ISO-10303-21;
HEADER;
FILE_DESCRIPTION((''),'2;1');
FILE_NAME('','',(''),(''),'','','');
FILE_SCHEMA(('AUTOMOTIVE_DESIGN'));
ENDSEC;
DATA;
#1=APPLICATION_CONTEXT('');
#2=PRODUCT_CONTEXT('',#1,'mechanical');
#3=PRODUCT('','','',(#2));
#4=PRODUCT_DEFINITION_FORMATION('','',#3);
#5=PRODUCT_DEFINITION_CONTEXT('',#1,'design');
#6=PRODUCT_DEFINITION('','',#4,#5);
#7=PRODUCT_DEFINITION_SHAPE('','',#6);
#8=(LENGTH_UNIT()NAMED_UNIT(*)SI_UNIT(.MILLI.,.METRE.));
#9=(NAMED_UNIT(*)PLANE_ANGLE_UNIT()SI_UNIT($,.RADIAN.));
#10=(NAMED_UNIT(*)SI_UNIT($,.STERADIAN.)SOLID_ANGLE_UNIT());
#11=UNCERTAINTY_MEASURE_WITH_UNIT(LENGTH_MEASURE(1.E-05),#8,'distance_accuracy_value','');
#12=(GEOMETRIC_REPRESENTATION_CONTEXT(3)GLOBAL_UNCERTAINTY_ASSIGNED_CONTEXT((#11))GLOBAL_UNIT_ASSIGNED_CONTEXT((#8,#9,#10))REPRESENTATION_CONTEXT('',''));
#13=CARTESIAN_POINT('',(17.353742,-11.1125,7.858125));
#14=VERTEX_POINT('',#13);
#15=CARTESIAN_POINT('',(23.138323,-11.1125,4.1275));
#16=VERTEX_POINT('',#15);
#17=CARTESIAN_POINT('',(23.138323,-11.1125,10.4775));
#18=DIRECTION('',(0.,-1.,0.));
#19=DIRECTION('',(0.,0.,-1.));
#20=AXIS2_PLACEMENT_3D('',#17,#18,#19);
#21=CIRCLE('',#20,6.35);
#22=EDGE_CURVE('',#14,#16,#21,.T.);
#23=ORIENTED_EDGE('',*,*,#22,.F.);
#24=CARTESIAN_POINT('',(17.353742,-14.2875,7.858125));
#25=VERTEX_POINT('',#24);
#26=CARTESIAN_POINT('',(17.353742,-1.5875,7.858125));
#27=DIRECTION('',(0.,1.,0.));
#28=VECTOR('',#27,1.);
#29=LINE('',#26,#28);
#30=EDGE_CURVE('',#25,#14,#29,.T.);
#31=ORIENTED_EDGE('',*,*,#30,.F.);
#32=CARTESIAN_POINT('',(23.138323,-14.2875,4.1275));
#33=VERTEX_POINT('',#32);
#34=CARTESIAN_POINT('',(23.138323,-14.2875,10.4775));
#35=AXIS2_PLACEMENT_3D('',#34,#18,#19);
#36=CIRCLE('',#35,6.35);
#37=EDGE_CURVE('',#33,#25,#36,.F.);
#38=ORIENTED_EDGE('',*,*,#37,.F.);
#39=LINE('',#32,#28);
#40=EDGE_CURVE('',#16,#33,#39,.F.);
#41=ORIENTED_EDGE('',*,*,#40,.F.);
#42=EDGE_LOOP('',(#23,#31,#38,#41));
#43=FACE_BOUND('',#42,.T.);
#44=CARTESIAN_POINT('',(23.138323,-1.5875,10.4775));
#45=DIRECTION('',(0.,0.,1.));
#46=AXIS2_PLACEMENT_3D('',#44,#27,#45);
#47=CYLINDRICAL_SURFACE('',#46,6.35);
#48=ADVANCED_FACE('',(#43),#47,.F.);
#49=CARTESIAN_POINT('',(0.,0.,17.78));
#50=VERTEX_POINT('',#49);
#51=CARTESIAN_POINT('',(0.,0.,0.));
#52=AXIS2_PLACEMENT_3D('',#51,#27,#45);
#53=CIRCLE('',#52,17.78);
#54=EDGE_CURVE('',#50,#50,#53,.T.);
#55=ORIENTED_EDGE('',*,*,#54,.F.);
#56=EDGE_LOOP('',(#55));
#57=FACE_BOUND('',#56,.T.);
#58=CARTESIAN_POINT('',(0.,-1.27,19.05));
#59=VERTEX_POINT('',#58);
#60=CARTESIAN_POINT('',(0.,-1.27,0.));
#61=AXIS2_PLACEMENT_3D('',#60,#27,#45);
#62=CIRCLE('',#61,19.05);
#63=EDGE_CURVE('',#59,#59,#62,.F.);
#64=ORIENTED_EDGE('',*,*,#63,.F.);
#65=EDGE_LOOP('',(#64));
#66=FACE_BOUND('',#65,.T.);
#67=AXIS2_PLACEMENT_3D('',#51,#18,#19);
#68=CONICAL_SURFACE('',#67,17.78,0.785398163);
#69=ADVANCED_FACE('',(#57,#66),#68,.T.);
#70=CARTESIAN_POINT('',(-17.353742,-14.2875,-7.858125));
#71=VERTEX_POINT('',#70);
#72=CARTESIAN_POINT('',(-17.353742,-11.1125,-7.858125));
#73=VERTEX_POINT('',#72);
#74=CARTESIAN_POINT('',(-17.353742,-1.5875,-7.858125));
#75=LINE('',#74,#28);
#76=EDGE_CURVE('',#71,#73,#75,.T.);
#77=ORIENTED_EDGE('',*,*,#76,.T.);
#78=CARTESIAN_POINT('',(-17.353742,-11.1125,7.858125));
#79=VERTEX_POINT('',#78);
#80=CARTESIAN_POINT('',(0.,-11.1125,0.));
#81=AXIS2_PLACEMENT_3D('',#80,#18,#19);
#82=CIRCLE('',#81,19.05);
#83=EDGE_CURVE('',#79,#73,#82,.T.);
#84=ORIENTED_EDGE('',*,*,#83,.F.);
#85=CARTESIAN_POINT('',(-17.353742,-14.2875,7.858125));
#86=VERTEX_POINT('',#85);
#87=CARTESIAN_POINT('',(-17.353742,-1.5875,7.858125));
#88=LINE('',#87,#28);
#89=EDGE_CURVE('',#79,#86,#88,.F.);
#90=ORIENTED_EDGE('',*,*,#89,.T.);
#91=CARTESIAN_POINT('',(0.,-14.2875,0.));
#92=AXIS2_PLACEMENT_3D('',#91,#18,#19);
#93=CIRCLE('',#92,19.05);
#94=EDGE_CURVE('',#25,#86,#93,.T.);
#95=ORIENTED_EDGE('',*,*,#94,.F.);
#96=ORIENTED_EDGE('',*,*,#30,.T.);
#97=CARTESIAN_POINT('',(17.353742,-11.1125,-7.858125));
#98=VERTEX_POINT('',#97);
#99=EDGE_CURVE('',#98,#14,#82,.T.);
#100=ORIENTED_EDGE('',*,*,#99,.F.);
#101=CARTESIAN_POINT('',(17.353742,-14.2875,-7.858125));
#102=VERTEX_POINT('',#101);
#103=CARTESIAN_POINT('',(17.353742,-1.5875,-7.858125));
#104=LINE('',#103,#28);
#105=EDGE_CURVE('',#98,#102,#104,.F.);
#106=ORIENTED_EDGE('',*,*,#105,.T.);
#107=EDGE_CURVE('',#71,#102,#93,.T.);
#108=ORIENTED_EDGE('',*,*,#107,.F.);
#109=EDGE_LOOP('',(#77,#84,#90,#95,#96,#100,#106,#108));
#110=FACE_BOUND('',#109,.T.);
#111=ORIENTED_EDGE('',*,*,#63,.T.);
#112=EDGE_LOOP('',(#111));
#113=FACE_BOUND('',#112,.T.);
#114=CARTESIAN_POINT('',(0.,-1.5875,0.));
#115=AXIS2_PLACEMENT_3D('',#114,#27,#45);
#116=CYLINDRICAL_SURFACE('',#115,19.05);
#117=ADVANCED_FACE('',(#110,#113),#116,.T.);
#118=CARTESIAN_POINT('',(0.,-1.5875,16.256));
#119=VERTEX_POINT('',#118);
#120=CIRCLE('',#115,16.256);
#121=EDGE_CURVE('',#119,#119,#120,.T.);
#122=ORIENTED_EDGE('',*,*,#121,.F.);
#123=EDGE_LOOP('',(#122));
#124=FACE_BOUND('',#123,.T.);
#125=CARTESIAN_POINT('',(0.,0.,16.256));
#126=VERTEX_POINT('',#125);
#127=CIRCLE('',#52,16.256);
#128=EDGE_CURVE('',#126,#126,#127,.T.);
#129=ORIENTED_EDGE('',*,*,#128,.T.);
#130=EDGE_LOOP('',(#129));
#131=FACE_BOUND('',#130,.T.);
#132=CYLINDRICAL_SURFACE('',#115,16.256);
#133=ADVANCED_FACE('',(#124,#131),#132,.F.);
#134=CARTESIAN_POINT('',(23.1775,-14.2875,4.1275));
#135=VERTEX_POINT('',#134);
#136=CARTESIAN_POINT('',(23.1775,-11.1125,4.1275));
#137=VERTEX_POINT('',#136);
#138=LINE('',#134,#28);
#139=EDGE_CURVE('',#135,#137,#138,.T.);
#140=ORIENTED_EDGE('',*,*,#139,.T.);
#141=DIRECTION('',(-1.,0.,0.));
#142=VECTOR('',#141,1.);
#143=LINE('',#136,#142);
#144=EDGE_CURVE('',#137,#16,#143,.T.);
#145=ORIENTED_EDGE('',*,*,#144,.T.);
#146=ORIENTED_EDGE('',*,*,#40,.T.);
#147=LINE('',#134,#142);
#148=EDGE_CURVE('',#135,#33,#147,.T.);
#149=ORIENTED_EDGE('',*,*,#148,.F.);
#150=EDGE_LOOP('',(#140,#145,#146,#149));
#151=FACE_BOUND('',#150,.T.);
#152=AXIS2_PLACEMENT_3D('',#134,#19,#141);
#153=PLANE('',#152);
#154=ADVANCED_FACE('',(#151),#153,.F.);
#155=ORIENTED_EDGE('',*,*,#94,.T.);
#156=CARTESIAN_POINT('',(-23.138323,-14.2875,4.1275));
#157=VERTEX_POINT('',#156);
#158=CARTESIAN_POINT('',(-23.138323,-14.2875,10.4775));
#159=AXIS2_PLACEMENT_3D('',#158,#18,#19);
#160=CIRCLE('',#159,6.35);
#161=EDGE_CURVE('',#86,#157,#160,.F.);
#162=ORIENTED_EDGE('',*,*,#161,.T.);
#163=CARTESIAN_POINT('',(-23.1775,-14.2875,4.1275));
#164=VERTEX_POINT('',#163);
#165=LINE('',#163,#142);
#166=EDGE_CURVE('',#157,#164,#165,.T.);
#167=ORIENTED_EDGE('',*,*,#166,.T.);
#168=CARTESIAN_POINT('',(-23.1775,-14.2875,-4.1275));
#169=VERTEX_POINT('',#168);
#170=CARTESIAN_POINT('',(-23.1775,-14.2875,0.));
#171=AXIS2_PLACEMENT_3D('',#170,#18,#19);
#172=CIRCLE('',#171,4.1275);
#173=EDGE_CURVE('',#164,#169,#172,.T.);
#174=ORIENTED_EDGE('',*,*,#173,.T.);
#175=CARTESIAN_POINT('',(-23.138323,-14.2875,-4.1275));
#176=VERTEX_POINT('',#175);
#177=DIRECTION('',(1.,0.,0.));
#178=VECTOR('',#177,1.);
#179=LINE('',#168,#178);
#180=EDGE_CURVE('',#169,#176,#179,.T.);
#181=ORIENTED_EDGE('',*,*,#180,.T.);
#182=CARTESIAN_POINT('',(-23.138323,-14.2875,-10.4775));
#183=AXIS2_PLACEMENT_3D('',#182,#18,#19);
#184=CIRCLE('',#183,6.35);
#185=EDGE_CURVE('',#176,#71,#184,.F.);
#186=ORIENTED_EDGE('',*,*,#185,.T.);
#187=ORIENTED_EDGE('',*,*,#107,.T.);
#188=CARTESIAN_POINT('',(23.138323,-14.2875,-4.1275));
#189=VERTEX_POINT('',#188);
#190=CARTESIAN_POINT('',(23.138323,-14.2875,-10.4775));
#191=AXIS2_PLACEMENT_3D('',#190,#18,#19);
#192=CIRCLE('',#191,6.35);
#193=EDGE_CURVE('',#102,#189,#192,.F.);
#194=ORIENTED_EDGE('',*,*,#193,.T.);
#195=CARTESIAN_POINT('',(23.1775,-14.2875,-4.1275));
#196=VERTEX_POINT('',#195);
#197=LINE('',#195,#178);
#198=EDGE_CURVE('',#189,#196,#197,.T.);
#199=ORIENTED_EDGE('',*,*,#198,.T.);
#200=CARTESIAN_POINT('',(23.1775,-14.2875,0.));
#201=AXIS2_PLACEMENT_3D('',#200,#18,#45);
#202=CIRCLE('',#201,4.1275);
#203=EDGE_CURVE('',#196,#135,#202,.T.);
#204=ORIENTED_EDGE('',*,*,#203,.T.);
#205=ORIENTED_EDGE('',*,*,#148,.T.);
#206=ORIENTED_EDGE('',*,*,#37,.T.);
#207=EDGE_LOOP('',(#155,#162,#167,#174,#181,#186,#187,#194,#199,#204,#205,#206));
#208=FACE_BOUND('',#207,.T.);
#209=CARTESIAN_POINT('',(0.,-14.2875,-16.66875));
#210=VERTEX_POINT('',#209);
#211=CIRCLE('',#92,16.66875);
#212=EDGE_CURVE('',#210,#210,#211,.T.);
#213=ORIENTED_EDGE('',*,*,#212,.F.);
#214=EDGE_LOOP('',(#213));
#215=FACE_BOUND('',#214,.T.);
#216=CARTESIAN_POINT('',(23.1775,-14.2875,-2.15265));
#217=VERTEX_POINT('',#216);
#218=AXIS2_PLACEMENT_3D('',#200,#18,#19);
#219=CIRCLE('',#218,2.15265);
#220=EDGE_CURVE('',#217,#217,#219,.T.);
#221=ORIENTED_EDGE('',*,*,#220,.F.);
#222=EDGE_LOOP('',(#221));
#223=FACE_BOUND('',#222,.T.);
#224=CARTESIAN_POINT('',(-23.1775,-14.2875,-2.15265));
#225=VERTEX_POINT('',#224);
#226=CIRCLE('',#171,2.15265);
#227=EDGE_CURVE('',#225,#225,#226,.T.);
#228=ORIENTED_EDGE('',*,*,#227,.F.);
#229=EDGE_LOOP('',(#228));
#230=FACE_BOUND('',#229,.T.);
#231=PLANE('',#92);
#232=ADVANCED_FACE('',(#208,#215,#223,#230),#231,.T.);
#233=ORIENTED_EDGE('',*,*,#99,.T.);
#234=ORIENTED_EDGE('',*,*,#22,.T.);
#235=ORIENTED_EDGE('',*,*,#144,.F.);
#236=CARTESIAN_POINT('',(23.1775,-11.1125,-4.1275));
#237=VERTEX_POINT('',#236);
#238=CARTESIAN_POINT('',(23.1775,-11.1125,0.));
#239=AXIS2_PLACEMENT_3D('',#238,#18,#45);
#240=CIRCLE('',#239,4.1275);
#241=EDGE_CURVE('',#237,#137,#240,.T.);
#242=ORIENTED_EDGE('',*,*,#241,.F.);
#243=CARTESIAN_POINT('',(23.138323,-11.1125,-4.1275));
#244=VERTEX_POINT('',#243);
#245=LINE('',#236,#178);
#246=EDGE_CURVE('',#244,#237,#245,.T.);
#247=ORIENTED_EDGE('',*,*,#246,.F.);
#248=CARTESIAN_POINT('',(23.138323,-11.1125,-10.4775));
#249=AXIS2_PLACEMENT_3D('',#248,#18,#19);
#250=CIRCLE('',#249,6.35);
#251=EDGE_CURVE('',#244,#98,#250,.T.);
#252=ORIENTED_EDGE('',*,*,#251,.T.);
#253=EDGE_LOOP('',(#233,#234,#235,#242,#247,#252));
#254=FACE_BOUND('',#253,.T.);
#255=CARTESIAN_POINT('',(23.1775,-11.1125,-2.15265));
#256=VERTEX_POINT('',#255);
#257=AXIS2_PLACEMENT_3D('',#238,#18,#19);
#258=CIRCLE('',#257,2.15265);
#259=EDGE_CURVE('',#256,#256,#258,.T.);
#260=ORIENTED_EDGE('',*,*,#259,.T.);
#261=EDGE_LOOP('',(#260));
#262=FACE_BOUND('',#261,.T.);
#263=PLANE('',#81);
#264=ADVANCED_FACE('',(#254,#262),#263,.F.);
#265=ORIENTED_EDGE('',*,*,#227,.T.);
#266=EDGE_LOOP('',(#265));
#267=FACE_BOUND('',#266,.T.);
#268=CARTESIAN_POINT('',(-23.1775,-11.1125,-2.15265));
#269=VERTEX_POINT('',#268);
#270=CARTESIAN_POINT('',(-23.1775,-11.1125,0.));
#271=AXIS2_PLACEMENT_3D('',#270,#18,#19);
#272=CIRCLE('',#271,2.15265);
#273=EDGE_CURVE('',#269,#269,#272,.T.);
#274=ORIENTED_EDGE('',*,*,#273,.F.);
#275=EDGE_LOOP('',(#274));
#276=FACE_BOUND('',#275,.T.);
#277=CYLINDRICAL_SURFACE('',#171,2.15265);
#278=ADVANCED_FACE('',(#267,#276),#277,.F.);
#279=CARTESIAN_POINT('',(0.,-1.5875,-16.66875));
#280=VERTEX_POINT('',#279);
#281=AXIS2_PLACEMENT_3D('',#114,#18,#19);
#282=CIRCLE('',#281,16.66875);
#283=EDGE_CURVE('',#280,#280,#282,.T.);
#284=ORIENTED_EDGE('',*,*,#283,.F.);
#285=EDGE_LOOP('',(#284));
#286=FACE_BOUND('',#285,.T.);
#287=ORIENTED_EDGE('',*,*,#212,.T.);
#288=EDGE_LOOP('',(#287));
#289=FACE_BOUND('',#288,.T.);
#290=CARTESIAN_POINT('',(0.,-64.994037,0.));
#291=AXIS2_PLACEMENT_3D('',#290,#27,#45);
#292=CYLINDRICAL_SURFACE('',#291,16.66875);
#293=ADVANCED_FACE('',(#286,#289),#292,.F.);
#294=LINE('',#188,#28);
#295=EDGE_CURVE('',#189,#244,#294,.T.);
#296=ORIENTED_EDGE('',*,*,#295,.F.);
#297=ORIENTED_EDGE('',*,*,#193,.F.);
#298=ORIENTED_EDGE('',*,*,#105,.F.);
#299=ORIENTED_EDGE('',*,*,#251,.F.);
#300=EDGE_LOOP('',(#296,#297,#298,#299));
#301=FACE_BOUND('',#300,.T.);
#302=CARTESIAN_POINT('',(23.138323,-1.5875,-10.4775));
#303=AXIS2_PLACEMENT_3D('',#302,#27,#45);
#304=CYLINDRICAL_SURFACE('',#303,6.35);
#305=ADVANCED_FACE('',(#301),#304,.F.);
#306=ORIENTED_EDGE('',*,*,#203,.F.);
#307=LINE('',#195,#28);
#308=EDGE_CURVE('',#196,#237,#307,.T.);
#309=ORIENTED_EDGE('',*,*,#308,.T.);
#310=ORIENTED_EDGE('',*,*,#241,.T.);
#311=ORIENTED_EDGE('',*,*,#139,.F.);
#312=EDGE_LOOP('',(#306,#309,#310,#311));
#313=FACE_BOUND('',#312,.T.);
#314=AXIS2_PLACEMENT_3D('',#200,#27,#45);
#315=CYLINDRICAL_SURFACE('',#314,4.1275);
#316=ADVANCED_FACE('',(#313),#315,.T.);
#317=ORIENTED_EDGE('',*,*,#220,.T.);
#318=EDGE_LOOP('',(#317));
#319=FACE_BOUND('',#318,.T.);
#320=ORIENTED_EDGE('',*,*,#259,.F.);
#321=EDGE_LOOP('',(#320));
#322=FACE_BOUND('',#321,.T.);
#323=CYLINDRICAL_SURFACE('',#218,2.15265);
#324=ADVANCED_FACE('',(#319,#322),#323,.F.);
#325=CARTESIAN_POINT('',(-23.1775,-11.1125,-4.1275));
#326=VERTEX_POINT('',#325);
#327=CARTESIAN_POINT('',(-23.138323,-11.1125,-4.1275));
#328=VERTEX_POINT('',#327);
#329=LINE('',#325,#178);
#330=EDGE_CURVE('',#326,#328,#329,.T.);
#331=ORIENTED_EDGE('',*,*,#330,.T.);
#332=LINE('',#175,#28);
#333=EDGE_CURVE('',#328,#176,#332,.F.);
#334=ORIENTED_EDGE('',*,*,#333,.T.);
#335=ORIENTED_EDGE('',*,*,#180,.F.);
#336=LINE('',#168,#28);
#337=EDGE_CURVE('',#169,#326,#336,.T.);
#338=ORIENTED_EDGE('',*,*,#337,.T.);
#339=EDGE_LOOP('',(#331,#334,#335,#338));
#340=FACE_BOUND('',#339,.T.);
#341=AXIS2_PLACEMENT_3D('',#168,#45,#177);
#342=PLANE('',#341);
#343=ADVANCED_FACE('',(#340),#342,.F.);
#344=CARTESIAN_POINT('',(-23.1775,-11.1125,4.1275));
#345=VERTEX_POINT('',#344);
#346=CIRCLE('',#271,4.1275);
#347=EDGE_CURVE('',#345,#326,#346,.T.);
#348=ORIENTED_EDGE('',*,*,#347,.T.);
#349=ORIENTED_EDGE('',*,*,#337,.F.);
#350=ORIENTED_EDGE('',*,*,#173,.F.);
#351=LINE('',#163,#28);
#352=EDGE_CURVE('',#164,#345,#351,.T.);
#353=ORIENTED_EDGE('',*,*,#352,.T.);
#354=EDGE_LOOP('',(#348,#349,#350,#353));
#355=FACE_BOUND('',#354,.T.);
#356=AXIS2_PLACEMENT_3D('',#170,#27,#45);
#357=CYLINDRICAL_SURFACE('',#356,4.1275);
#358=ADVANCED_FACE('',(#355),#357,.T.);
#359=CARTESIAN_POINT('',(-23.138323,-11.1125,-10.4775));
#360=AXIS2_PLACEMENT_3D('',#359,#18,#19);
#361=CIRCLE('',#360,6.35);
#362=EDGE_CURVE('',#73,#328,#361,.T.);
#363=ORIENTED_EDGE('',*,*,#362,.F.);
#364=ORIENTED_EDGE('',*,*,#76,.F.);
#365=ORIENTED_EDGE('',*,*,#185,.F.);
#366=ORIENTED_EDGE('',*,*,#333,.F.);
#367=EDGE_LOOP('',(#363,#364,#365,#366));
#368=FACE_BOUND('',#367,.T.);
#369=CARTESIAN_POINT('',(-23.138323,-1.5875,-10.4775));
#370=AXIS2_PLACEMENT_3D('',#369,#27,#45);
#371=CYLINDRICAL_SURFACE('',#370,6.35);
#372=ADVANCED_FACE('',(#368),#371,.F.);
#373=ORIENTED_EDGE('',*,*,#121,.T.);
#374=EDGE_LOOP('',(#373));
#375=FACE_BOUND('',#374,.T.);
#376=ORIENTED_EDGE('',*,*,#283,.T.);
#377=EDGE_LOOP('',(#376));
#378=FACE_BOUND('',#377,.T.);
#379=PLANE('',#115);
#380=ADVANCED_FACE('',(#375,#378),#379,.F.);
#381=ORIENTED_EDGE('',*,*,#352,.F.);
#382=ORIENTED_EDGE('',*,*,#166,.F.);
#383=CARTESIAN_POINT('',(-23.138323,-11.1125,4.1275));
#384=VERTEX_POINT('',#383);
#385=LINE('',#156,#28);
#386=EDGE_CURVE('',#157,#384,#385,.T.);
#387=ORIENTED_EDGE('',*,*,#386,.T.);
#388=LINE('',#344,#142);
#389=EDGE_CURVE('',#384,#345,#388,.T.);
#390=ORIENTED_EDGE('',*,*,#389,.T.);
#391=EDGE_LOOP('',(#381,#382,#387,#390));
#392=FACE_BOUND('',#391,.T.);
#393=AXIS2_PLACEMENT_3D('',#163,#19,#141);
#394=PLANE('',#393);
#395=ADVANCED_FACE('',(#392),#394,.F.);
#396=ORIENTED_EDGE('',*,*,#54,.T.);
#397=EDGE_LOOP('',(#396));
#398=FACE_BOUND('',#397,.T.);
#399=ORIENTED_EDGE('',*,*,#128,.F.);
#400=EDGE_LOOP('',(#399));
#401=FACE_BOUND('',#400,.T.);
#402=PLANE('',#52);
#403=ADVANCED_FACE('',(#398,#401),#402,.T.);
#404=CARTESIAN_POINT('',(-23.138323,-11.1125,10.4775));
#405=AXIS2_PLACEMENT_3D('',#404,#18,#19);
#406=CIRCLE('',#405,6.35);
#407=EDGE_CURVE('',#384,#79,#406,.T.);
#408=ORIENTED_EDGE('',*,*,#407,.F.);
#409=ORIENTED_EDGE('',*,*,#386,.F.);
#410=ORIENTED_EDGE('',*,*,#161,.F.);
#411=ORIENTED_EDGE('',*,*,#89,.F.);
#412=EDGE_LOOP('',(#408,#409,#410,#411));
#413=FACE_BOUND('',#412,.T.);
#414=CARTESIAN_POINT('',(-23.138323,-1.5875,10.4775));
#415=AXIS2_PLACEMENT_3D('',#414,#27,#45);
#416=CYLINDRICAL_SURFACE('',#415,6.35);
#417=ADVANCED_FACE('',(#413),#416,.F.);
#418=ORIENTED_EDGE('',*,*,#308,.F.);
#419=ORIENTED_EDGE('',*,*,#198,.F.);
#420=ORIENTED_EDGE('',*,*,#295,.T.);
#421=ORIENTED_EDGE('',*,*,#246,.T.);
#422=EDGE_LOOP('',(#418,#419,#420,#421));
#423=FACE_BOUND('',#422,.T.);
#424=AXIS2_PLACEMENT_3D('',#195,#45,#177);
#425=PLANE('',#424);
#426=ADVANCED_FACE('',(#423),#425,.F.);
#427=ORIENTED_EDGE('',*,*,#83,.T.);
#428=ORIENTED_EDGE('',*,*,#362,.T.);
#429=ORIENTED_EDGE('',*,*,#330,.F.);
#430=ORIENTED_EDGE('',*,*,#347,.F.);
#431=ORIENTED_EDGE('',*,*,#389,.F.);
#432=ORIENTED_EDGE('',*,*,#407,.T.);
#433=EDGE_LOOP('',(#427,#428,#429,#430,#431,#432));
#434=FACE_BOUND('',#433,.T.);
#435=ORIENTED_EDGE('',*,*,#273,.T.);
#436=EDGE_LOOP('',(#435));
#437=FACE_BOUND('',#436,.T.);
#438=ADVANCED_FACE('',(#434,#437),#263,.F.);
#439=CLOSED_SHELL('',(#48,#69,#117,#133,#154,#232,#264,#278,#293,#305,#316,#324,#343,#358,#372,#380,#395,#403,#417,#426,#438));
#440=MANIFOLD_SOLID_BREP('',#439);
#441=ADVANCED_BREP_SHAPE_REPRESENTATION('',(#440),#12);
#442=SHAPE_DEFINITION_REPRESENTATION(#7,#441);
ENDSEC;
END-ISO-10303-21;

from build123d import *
from build123d.topology import SkipClean

# Parameters (mm, degrees)
SKETCH1_R             = 19.05
SKETCH1_R_2           = 16.256
BOSS_EXTRUDE1_DEPTH   = 1.5875
SKETCH2_R             = 19.05
SKETCH2_R_2           = 16.66875
BOSS_EXTRUDE2_DEPTH   = 9.525
CHAMFER1_SIZE         = 1.27
SKETCH3_R             = 16.66875
BOSS_EXTRUDE3_DEPTH   = 3.175
FILLET1_R             = 6.35
F_6_CLEARANCE_HOLE1_D = 4.3053


with BuildPart() as part:
    # Sketch1 → Boss-Extrude1 (new body)
    with BuildSketch(Plane(origin=(0, 0, 0), x_dir=(1, 0, 0), z_dir=(0, 1, 0))):
        with Locations(Location((0, 0, 0), (0, 0, 270))):
            Circle(SKETCH1_R)
        with Locations(Location((0, 0, 0), (0, 0, 270))):
            Circle(SKETCH1_R_2, mode=Mode.SUBTRACT)
    extrude(amount=-BOSS_EXTRUDE1_DEPTH)

    # Sketch2 → Boss-Extrude2 (add)
    with BuildSketch(Plane.XZ.offset(1.5875)):
        with Locations(Location((0, 0, 0), (0, 0, 90))):
            Circle(SKETCH2_R)
        with Locations(Location((0, 0, 0), (0, 0, 270))):
            Circle(SKETCH2_R_2, mode=Mode.SUBTRACT)
    extrude(amount=BOSS_EXTRUDE2_DEPTH)

    # Chamfer1
    chamfer1_edges = [part.edges().sort_by_distance(p)[0] for p in [
        (0, 0, -19.05),
    ]]
    chamfer(chamfer1_edges, length=CHAMFER1_SIZE)

    # Sketch3 → Boss-Extrude3 (add)
    with SkipClean():  # the faces are left unmerged after this step: merging them gives an invalid solid
        with BuildSketch(Plane.XZ.offset(11.1125)):
            with BuildLine():
                Line((-23.1775, 4.1275), (-18.5974795, 4.1275))
                ThreePointArc((-18.5974795, 4.1275), (0, 19.05), (18.5974795, 4.1275))
                Line((18.5974795, 4.1275), (23.1775, 4.1275))
                ThreePointArc((23.1775, 4.1275), (27.305, 0), (23.1775, -4.1275))
                Line((23.1775, -4.1275), (18.5974795, -4.1275))
                ThreePointArc((18.5974795, -4.1275), (0, -19.05), (-18.5974795, -4.1275))
                Line((-18.5974795, -4.1275), (-23.1775, -4.1275))
                ThreePointArc((-23.1775, -4.1275), (-27.305, 0), (-23.1775, 4.1275))
            make_face()
            with Locations(Location((0, 0, 0), (0, 0, 270))):
                Circle(SKETCH3_R, mode=Mode.SUBTRACT)
        extrude(amount=BOSS_EXTRUDE3_DEPTH)
    add(part.part.scale(1), mode=Mode.REPLACE)  # the faces are merged on a copy

    # Fillet1
    # the kernel refuses this fillet: 6.35 mm, written as the material it adds along each edge
    with BuildSketch(Plane(origin=(18.5974795, -11.1125, 4.1275), x_dir=(-0.3162725181456123, 0, 0.948668379501411), z_dir=(0, -1, 0)), Plane(origin=(-18.5974795, -11.1125, -4.1275), x_dir=(0.3162725181456131, 0, -0.9486683795014108), z_dir=(0, -1, 0))) as fillet1_piece_1:
        with BuildLine():
            CenterArc((4.587900184, -6.316085186), FILLET1_R, 95.924326289, 65.63802206)
            Line((-1.436144025, -4.307754696), (0, 0))
            ThreePointArc((0, 0), (1.966242936, -0.101744441), (3.932485872, 0))
        make_face()
    extrude(amount=3.175)
    with BuildSketch(Plane(origin=(-18.5974795, -11.1125, 4.1275), x_dir=(0.3162725181456136, 0, 0.9486683795014107), z_dir=(0, -1, 0)), Plane(origin=(18.5974795, -11.1125, -4.1275), x_dir=(-0.3162725181456148, 0, -0.9486683795014103), z_dir=(0, -1, 0))) as fillet1_piece_2:
        with BuildLine():
            CenterArc((4.587900184, 6.316085186), FILLET1_R, 198.437651651, 65.63802206)
            Line((-1.436144025, 4.307754696), (0, 0))
            ThreePointArc((0, 0), (1.966242936, 0.101744441), (3.932485872, 0))
        make_face()
    extrude(amount=3.175)

    # #6 Clearance Hole1 (through all)
    with Locations(Plane(origin=(0, -14.2875, 0), x_dir=(-1, 0, 0), z_dir=(0, -1, 0))):
        with Locations((-23.1775, 0), (23.1775, 0)):
            Hole(F_6_CLEARANCE_HOLE1_D / 2)


solid = part.part
